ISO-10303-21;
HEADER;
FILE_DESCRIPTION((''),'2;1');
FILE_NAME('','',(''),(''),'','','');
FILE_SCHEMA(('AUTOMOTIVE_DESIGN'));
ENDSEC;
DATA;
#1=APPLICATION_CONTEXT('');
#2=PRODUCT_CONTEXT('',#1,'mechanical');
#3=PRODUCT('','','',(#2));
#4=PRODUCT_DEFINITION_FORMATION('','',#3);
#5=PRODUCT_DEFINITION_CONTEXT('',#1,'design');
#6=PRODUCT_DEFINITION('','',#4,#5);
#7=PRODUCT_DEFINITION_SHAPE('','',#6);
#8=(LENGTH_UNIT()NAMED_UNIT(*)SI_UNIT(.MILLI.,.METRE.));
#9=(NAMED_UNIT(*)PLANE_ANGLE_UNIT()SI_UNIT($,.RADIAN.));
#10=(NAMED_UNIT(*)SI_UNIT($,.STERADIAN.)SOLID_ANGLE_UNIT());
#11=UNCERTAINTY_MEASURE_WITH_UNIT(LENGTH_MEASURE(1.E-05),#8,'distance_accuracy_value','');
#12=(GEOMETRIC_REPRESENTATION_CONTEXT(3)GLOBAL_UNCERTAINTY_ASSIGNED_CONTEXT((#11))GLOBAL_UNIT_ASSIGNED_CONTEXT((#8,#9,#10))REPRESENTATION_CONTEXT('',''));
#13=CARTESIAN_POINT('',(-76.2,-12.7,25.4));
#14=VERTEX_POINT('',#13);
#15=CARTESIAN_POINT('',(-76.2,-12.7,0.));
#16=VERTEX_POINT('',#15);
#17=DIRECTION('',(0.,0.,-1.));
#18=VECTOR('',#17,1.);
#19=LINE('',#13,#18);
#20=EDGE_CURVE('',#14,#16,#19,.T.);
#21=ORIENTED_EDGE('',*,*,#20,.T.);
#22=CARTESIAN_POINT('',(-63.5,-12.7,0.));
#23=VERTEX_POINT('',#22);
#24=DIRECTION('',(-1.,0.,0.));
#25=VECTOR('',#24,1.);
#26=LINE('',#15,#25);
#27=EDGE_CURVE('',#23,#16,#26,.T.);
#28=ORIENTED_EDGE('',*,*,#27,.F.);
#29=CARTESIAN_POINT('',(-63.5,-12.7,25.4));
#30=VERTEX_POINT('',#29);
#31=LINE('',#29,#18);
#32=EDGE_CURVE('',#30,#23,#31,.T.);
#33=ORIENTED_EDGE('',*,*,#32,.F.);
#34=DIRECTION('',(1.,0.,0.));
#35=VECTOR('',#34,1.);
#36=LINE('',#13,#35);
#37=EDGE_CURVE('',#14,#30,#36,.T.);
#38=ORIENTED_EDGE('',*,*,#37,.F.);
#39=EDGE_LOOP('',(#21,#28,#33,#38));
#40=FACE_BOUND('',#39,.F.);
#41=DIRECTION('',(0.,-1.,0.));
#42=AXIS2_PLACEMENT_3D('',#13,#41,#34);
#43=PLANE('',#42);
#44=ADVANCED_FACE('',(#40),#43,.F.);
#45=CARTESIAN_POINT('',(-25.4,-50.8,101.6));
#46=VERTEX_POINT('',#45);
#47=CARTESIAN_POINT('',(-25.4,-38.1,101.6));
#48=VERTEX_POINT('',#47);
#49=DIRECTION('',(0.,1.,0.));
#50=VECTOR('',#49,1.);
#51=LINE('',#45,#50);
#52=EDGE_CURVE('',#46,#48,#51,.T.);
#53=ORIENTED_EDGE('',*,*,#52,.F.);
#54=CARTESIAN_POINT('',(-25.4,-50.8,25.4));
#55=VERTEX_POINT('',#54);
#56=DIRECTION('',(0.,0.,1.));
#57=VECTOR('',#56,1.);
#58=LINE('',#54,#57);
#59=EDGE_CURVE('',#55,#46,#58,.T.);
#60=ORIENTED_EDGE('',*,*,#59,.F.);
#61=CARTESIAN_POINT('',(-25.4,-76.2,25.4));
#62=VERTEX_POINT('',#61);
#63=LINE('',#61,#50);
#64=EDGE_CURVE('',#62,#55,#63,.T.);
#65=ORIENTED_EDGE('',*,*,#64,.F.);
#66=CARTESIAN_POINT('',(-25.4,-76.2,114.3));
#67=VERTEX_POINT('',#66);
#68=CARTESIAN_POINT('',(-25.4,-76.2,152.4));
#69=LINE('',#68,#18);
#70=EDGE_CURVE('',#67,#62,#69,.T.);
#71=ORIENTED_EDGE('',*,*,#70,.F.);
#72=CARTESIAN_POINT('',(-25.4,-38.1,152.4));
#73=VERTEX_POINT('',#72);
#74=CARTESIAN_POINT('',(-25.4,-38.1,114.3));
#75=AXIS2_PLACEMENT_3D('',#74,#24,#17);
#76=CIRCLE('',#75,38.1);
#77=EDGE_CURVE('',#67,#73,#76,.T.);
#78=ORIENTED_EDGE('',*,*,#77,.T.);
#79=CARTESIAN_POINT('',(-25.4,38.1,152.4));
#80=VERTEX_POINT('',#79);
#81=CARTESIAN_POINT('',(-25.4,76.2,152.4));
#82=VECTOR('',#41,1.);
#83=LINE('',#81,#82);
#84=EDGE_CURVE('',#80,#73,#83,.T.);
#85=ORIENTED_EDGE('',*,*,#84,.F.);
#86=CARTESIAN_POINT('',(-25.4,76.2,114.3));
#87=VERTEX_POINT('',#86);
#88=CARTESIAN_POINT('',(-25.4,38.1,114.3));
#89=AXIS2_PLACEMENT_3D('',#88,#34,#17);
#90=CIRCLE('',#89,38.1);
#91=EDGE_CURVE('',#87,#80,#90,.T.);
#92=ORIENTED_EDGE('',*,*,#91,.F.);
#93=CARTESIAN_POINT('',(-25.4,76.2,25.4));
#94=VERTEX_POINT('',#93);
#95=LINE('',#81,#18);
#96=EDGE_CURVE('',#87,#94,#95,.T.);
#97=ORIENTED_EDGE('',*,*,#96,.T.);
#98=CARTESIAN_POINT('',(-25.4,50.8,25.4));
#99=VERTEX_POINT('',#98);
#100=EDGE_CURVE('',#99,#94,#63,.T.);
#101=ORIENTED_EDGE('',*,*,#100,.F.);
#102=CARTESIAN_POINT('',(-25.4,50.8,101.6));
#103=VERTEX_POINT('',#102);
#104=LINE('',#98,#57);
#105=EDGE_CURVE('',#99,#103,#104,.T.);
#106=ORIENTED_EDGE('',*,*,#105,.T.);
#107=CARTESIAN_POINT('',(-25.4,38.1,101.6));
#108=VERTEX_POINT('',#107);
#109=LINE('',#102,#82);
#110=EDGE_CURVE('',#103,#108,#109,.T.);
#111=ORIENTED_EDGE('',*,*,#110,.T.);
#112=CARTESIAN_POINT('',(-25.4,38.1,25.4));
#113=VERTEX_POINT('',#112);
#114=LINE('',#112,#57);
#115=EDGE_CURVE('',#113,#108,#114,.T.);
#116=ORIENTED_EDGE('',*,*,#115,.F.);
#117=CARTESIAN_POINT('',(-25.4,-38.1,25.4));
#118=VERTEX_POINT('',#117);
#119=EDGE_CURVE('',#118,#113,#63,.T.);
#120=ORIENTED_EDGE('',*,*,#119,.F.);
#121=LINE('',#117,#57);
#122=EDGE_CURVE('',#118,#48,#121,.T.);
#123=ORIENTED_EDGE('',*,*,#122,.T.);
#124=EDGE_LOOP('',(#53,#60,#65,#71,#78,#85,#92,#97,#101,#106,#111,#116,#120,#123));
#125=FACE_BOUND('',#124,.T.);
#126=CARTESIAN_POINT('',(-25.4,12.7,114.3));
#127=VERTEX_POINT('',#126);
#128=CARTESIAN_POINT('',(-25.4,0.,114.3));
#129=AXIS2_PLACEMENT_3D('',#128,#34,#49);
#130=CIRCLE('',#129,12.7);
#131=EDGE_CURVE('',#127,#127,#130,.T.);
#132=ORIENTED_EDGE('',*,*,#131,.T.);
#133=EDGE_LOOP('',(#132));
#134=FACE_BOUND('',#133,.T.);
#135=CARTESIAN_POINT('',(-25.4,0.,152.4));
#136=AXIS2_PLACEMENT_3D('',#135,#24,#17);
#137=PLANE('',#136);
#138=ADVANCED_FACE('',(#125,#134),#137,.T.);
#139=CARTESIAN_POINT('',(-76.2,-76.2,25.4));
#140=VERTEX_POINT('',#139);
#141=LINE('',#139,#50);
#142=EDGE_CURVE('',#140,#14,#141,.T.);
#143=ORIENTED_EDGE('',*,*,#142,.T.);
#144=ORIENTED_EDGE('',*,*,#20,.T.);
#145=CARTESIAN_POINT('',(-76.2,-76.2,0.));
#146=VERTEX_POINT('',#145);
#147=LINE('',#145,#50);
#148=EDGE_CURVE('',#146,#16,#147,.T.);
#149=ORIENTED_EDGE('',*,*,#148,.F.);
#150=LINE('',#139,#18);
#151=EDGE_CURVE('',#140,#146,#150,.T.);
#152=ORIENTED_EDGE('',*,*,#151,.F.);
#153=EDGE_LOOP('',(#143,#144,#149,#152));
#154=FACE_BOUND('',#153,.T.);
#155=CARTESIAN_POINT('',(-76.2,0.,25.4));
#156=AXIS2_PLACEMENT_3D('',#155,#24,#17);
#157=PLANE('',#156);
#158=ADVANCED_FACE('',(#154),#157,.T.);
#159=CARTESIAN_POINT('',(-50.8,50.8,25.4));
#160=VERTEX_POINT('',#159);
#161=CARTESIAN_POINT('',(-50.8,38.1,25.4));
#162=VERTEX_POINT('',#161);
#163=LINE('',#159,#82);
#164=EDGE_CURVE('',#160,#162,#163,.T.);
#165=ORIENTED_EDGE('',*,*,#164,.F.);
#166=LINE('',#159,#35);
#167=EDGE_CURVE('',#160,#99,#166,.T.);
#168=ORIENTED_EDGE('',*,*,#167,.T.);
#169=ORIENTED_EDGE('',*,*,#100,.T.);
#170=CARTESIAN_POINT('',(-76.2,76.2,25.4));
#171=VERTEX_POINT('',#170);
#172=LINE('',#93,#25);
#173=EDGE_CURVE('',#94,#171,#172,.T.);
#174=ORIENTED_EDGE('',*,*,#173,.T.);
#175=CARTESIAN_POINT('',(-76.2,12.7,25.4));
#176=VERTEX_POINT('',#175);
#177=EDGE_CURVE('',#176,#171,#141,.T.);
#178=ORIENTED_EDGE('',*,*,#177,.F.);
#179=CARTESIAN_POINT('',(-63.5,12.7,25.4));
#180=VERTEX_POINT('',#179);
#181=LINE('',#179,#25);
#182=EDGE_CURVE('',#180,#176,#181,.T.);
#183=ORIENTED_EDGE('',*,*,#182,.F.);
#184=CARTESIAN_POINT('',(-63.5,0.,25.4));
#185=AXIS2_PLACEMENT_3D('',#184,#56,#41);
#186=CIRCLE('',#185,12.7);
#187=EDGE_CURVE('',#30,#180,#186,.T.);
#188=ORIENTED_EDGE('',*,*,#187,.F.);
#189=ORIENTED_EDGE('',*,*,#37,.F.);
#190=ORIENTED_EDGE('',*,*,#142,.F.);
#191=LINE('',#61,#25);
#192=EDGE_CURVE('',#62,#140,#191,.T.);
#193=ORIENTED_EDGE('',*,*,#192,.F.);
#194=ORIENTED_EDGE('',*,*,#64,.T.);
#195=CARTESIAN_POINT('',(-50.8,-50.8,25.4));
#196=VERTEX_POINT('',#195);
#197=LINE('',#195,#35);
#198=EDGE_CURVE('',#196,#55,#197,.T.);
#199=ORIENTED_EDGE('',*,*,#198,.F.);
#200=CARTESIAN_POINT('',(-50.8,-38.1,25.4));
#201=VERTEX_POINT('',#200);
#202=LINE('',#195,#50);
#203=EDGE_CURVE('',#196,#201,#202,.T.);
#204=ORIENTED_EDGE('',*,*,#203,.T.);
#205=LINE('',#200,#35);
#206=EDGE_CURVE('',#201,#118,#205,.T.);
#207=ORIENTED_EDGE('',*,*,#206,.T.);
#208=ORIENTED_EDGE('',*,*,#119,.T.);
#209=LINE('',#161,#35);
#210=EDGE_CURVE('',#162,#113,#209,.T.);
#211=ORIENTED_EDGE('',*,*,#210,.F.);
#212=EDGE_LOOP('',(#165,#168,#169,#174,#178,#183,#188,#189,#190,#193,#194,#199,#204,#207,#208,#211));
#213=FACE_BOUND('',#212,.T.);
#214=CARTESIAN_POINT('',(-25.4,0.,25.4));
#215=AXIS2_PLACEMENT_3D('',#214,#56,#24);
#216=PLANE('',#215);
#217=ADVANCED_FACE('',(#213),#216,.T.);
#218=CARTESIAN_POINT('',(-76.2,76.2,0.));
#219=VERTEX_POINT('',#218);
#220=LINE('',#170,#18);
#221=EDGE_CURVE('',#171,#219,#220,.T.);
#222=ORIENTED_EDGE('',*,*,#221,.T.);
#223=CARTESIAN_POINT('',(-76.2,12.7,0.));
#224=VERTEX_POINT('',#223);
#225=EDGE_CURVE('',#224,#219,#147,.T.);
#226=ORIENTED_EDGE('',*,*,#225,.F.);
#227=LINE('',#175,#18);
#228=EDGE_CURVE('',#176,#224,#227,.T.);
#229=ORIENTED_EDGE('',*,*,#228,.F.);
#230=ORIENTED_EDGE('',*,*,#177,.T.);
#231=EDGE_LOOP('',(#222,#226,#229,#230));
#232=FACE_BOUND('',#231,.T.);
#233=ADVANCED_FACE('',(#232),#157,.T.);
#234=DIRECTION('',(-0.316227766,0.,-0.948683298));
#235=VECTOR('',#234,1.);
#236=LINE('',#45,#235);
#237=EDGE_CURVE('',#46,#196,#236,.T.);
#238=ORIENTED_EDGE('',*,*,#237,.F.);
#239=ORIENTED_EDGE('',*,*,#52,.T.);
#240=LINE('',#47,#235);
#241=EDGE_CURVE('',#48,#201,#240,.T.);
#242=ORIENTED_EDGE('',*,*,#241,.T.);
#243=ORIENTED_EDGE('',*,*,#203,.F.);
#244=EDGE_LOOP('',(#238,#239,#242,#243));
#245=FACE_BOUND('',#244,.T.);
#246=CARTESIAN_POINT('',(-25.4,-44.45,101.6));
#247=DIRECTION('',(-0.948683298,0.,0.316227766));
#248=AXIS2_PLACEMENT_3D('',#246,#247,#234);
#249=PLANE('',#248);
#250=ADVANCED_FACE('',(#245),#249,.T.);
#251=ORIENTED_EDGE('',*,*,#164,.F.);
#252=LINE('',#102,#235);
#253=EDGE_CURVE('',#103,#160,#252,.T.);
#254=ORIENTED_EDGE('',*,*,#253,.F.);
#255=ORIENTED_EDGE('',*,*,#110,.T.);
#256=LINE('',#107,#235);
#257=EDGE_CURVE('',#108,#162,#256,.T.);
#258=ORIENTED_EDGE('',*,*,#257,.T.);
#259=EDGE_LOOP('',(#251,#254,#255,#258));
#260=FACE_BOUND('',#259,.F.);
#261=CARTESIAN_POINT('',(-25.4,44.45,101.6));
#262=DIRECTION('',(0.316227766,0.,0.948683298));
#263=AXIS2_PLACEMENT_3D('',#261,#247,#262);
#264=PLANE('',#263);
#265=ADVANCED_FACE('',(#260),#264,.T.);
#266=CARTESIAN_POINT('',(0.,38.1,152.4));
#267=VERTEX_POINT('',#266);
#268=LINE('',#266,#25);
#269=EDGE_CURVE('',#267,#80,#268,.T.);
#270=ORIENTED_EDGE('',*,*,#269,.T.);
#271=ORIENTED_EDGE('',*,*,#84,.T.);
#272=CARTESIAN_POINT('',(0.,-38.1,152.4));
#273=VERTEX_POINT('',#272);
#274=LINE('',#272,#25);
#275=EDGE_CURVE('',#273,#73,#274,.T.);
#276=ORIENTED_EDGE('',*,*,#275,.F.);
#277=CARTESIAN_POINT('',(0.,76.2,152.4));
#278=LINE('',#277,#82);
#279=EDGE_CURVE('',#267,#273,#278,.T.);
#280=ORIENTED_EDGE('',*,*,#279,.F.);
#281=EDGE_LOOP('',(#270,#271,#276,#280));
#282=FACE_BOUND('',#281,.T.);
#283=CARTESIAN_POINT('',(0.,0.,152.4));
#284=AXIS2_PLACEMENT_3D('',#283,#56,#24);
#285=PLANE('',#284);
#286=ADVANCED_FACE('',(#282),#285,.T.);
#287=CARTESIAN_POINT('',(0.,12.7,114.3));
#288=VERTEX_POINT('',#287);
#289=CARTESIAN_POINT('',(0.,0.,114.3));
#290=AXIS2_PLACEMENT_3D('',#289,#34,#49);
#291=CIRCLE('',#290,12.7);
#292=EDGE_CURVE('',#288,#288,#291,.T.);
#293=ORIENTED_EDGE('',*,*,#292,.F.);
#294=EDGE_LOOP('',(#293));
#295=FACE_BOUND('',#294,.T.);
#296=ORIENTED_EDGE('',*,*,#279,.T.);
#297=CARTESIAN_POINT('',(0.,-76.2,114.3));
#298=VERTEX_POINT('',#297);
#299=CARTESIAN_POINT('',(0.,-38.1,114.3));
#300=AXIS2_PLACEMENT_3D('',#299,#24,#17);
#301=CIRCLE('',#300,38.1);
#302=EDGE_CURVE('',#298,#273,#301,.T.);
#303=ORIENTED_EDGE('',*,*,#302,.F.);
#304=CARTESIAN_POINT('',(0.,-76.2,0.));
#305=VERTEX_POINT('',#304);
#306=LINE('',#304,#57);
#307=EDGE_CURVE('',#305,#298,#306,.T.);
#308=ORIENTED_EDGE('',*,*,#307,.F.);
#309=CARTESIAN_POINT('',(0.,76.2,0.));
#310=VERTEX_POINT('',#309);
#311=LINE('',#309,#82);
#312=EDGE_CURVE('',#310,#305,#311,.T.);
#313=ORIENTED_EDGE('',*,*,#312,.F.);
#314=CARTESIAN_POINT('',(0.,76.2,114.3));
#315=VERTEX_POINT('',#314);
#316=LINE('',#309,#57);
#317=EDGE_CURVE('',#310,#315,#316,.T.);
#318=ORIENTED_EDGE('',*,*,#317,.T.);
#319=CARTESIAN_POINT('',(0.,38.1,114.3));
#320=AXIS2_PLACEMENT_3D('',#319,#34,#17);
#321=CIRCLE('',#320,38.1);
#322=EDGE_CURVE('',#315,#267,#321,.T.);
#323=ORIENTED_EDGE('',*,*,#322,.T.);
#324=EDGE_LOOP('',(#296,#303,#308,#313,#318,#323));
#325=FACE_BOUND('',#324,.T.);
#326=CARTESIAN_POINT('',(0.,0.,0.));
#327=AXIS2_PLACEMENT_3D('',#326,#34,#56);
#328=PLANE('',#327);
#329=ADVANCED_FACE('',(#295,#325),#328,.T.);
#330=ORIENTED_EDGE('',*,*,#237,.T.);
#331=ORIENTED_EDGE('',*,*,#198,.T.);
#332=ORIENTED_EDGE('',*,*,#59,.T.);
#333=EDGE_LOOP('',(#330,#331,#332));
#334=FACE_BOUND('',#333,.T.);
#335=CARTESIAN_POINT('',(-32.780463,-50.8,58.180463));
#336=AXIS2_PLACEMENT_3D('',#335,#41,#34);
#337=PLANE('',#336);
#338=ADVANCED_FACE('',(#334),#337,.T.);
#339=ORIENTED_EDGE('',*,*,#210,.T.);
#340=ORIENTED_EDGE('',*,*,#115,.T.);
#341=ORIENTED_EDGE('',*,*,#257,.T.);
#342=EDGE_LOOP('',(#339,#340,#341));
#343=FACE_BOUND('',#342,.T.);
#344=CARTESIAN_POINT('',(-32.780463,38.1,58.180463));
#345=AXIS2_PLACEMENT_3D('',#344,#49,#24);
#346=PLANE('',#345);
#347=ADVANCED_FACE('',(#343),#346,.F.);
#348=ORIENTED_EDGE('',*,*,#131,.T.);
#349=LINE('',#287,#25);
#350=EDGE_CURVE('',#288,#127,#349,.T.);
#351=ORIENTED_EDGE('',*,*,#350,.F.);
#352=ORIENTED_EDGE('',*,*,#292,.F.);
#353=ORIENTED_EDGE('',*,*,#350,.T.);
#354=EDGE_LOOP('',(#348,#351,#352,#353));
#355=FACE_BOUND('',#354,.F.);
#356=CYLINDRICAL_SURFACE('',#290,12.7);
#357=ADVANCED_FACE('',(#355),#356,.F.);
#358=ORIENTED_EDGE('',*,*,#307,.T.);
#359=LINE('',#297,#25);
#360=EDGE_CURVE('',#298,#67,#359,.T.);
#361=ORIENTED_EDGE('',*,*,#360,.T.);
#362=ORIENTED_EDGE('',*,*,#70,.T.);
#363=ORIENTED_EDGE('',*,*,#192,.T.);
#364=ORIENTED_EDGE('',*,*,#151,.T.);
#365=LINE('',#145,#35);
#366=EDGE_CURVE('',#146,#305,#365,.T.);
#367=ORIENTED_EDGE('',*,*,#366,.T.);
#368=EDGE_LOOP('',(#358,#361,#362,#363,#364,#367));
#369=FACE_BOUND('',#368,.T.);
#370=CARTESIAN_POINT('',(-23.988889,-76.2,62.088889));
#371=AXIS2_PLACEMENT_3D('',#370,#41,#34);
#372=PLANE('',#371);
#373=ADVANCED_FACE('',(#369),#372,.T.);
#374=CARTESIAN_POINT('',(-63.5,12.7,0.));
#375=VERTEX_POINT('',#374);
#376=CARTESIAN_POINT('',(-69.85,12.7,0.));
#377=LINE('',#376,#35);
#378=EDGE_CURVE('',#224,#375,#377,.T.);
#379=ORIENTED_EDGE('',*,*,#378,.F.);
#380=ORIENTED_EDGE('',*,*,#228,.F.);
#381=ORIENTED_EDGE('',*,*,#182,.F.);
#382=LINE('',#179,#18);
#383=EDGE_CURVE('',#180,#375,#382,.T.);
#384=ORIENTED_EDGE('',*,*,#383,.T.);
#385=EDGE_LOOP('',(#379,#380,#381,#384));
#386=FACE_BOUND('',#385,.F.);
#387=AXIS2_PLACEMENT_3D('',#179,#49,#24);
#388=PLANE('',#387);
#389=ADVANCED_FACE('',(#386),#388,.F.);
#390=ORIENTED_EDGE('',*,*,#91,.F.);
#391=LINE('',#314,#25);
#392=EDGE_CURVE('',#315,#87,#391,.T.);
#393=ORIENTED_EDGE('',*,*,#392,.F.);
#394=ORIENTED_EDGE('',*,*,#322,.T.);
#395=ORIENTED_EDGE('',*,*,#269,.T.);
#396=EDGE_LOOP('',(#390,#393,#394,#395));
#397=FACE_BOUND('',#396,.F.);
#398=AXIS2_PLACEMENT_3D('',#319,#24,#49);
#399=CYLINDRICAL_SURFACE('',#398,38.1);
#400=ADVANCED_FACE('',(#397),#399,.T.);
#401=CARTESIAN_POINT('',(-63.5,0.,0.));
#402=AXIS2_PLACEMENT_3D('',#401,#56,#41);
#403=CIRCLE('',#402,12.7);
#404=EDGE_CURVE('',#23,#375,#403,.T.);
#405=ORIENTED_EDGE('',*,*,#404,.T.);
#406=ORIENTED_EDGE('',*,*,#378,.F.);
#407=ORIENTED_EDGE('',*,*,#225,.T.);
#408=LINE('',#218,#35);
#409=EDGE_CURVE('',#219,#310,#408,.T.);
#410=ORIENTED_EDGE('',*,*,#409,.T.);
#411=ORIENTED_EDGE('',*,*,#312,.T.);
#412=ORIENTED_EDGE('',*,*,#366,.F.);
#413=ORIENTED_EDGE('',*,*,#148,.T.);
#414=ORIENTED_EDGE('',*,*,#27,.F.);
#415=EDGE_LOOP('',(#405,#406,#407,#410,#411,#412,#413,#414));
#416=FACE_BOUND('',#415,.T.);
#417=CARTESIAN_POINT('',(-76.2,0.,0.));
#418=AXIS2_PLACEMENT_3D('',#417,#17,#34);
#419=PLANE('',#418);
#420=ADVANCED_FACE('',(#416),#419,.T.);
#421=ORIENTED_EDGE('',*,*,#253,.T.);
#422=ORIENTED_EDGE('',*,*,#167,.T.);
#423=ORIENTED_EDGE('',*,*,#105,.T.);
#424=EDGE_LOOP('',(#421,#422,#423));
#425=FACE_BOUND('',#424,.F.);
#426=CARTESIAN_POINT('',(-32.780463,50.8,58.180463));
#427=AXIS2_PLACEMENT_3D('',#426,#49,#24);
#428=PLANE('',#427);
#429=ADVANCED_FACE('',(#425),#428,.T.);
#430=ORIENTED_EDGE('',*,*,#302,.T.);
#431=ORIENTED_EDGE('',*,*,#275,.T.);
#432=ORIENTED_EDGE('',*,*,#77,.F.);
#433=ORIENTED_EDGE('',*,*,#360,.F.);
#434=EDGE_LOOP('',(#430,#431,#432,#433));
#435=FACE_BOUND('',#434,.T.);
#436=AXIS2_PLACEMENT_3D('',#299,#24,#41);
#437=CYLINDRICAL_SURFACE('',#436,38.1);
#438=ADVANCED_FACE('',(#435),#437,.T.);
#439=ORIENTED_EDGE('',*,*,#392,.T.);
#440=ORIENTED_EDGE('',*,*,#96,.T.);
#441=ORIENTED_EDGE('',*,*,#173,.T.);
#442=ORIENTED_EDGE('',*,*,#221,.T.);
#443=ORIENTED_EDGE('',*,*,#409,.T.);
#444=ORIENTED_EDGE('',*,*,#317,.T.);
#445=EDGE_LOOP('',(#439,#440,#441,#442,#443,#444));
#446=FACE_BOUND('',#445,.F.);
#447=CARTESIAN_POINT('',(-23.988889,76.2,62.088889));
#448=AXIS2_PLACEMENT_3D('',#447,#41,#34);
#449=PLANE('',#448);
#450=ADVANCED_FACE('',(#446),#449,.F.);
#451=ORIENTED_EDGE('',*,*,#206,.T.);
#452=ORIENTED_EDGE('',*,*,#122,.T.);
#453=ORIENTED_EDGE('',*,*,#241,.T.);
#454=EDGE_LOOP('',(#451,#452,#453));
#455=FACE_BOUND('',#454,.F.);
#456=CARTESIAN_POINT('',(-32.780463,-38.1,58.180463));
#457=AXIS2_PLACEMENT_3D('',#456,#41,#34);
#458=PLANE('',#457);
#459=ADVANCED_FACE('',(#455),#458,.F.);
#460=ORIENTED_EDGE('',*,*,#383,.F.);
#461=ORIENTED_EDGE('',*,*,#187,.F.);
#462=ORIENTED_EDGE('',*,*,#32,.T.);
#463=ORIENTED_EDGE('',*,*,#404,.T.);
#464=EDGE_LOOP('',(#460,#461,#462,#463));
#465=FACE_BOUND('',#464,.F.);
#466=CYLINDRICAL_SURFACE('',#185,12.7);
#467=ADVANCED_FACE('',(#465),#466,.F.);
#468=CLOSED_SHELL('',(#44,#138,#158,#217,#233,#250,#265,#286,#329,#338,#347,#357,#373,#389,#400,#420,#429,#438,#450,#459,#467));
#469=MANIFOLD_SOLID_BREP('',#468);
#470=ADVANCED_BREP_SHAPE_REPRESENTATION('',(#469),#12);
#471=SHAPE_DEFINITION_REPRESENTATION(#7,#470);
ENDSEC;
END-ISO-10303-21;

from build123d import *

# Parameters (mm, degrees)
F1_DEPTH = 76.2
F2_R     = 12.7
F3_DEPTH = 76.201
F5_DEPTH = 25.401
F6_R     = 38.1
F9_DEPTH = 6.35


# Not quite as in the source:
# - a pattern or mirror of a feature is missing from the dataset's text; its kind, count and spacing are read off the source's solid


with BuildPart() as f1:
    # F0 (on Front) → F1 (new body, symmetric)
    with BuildSketch(Plane.XZ):
        Polygon((-76.2, 0), (0, 0), (0, 152.4), (-25.4, 152.4), (-25.4, 25.4), (-76.2, 25.4), align=None)
    extrude(amount=F1_DEPTH, both=True)

    # F2 (on Right) → F3 (cut, through all)
    with BuildSketch(Plane.YZ):
        with Locations((0, 114.3)):
            Circle(F2_R)
    extrude(amount=-F3_DEPTH, mode=Mode.SUBTRACT)

    # F4 (on face) → F5 (cut, through all)
    with BuildSketch(Plane.XY.offset(25.4)):
        with BuildLine():
            Line((-76.2, 12.7), (-76.2, 0))
            Line((-76.2, 0), (-76.2, -12.7))
            Line((-76.2, -12.7), (-63.5, -12.7))
            ThreePointArc((-63.5, -12.7), (-50.8, 0), (-63.5, 12.7))
            Line((-63.5, 12.7), (-76.2, 12.7))
        make_face()
    extrude(amount=-F5_DEPTH, mode=Mode.SUBTRACT)

    # F6
    f6_edges = [f1.edges().sort_by_distance(p)[0] for p in [
        (-12.7, -76.2, 152.4),
        (-12.7, 76.2, 152.4),
    ]]
    fillet(f6_edges, radius=F6_R)

    # F8 (on offset) → F9 (join, symmetric)
    with BuildSketch(Plane.XZ.offset(44.45)):
        Polygon((-50.8, 25.4), (-25.4, 25.4), (-25.4, 101.6), align=None)
    f9 = extrude(amount=F9_DEPTH, both=True)

    # F9_copies: F9 across plane
    add(f9.mirror(Plane.ZX))


solid = f1.part
